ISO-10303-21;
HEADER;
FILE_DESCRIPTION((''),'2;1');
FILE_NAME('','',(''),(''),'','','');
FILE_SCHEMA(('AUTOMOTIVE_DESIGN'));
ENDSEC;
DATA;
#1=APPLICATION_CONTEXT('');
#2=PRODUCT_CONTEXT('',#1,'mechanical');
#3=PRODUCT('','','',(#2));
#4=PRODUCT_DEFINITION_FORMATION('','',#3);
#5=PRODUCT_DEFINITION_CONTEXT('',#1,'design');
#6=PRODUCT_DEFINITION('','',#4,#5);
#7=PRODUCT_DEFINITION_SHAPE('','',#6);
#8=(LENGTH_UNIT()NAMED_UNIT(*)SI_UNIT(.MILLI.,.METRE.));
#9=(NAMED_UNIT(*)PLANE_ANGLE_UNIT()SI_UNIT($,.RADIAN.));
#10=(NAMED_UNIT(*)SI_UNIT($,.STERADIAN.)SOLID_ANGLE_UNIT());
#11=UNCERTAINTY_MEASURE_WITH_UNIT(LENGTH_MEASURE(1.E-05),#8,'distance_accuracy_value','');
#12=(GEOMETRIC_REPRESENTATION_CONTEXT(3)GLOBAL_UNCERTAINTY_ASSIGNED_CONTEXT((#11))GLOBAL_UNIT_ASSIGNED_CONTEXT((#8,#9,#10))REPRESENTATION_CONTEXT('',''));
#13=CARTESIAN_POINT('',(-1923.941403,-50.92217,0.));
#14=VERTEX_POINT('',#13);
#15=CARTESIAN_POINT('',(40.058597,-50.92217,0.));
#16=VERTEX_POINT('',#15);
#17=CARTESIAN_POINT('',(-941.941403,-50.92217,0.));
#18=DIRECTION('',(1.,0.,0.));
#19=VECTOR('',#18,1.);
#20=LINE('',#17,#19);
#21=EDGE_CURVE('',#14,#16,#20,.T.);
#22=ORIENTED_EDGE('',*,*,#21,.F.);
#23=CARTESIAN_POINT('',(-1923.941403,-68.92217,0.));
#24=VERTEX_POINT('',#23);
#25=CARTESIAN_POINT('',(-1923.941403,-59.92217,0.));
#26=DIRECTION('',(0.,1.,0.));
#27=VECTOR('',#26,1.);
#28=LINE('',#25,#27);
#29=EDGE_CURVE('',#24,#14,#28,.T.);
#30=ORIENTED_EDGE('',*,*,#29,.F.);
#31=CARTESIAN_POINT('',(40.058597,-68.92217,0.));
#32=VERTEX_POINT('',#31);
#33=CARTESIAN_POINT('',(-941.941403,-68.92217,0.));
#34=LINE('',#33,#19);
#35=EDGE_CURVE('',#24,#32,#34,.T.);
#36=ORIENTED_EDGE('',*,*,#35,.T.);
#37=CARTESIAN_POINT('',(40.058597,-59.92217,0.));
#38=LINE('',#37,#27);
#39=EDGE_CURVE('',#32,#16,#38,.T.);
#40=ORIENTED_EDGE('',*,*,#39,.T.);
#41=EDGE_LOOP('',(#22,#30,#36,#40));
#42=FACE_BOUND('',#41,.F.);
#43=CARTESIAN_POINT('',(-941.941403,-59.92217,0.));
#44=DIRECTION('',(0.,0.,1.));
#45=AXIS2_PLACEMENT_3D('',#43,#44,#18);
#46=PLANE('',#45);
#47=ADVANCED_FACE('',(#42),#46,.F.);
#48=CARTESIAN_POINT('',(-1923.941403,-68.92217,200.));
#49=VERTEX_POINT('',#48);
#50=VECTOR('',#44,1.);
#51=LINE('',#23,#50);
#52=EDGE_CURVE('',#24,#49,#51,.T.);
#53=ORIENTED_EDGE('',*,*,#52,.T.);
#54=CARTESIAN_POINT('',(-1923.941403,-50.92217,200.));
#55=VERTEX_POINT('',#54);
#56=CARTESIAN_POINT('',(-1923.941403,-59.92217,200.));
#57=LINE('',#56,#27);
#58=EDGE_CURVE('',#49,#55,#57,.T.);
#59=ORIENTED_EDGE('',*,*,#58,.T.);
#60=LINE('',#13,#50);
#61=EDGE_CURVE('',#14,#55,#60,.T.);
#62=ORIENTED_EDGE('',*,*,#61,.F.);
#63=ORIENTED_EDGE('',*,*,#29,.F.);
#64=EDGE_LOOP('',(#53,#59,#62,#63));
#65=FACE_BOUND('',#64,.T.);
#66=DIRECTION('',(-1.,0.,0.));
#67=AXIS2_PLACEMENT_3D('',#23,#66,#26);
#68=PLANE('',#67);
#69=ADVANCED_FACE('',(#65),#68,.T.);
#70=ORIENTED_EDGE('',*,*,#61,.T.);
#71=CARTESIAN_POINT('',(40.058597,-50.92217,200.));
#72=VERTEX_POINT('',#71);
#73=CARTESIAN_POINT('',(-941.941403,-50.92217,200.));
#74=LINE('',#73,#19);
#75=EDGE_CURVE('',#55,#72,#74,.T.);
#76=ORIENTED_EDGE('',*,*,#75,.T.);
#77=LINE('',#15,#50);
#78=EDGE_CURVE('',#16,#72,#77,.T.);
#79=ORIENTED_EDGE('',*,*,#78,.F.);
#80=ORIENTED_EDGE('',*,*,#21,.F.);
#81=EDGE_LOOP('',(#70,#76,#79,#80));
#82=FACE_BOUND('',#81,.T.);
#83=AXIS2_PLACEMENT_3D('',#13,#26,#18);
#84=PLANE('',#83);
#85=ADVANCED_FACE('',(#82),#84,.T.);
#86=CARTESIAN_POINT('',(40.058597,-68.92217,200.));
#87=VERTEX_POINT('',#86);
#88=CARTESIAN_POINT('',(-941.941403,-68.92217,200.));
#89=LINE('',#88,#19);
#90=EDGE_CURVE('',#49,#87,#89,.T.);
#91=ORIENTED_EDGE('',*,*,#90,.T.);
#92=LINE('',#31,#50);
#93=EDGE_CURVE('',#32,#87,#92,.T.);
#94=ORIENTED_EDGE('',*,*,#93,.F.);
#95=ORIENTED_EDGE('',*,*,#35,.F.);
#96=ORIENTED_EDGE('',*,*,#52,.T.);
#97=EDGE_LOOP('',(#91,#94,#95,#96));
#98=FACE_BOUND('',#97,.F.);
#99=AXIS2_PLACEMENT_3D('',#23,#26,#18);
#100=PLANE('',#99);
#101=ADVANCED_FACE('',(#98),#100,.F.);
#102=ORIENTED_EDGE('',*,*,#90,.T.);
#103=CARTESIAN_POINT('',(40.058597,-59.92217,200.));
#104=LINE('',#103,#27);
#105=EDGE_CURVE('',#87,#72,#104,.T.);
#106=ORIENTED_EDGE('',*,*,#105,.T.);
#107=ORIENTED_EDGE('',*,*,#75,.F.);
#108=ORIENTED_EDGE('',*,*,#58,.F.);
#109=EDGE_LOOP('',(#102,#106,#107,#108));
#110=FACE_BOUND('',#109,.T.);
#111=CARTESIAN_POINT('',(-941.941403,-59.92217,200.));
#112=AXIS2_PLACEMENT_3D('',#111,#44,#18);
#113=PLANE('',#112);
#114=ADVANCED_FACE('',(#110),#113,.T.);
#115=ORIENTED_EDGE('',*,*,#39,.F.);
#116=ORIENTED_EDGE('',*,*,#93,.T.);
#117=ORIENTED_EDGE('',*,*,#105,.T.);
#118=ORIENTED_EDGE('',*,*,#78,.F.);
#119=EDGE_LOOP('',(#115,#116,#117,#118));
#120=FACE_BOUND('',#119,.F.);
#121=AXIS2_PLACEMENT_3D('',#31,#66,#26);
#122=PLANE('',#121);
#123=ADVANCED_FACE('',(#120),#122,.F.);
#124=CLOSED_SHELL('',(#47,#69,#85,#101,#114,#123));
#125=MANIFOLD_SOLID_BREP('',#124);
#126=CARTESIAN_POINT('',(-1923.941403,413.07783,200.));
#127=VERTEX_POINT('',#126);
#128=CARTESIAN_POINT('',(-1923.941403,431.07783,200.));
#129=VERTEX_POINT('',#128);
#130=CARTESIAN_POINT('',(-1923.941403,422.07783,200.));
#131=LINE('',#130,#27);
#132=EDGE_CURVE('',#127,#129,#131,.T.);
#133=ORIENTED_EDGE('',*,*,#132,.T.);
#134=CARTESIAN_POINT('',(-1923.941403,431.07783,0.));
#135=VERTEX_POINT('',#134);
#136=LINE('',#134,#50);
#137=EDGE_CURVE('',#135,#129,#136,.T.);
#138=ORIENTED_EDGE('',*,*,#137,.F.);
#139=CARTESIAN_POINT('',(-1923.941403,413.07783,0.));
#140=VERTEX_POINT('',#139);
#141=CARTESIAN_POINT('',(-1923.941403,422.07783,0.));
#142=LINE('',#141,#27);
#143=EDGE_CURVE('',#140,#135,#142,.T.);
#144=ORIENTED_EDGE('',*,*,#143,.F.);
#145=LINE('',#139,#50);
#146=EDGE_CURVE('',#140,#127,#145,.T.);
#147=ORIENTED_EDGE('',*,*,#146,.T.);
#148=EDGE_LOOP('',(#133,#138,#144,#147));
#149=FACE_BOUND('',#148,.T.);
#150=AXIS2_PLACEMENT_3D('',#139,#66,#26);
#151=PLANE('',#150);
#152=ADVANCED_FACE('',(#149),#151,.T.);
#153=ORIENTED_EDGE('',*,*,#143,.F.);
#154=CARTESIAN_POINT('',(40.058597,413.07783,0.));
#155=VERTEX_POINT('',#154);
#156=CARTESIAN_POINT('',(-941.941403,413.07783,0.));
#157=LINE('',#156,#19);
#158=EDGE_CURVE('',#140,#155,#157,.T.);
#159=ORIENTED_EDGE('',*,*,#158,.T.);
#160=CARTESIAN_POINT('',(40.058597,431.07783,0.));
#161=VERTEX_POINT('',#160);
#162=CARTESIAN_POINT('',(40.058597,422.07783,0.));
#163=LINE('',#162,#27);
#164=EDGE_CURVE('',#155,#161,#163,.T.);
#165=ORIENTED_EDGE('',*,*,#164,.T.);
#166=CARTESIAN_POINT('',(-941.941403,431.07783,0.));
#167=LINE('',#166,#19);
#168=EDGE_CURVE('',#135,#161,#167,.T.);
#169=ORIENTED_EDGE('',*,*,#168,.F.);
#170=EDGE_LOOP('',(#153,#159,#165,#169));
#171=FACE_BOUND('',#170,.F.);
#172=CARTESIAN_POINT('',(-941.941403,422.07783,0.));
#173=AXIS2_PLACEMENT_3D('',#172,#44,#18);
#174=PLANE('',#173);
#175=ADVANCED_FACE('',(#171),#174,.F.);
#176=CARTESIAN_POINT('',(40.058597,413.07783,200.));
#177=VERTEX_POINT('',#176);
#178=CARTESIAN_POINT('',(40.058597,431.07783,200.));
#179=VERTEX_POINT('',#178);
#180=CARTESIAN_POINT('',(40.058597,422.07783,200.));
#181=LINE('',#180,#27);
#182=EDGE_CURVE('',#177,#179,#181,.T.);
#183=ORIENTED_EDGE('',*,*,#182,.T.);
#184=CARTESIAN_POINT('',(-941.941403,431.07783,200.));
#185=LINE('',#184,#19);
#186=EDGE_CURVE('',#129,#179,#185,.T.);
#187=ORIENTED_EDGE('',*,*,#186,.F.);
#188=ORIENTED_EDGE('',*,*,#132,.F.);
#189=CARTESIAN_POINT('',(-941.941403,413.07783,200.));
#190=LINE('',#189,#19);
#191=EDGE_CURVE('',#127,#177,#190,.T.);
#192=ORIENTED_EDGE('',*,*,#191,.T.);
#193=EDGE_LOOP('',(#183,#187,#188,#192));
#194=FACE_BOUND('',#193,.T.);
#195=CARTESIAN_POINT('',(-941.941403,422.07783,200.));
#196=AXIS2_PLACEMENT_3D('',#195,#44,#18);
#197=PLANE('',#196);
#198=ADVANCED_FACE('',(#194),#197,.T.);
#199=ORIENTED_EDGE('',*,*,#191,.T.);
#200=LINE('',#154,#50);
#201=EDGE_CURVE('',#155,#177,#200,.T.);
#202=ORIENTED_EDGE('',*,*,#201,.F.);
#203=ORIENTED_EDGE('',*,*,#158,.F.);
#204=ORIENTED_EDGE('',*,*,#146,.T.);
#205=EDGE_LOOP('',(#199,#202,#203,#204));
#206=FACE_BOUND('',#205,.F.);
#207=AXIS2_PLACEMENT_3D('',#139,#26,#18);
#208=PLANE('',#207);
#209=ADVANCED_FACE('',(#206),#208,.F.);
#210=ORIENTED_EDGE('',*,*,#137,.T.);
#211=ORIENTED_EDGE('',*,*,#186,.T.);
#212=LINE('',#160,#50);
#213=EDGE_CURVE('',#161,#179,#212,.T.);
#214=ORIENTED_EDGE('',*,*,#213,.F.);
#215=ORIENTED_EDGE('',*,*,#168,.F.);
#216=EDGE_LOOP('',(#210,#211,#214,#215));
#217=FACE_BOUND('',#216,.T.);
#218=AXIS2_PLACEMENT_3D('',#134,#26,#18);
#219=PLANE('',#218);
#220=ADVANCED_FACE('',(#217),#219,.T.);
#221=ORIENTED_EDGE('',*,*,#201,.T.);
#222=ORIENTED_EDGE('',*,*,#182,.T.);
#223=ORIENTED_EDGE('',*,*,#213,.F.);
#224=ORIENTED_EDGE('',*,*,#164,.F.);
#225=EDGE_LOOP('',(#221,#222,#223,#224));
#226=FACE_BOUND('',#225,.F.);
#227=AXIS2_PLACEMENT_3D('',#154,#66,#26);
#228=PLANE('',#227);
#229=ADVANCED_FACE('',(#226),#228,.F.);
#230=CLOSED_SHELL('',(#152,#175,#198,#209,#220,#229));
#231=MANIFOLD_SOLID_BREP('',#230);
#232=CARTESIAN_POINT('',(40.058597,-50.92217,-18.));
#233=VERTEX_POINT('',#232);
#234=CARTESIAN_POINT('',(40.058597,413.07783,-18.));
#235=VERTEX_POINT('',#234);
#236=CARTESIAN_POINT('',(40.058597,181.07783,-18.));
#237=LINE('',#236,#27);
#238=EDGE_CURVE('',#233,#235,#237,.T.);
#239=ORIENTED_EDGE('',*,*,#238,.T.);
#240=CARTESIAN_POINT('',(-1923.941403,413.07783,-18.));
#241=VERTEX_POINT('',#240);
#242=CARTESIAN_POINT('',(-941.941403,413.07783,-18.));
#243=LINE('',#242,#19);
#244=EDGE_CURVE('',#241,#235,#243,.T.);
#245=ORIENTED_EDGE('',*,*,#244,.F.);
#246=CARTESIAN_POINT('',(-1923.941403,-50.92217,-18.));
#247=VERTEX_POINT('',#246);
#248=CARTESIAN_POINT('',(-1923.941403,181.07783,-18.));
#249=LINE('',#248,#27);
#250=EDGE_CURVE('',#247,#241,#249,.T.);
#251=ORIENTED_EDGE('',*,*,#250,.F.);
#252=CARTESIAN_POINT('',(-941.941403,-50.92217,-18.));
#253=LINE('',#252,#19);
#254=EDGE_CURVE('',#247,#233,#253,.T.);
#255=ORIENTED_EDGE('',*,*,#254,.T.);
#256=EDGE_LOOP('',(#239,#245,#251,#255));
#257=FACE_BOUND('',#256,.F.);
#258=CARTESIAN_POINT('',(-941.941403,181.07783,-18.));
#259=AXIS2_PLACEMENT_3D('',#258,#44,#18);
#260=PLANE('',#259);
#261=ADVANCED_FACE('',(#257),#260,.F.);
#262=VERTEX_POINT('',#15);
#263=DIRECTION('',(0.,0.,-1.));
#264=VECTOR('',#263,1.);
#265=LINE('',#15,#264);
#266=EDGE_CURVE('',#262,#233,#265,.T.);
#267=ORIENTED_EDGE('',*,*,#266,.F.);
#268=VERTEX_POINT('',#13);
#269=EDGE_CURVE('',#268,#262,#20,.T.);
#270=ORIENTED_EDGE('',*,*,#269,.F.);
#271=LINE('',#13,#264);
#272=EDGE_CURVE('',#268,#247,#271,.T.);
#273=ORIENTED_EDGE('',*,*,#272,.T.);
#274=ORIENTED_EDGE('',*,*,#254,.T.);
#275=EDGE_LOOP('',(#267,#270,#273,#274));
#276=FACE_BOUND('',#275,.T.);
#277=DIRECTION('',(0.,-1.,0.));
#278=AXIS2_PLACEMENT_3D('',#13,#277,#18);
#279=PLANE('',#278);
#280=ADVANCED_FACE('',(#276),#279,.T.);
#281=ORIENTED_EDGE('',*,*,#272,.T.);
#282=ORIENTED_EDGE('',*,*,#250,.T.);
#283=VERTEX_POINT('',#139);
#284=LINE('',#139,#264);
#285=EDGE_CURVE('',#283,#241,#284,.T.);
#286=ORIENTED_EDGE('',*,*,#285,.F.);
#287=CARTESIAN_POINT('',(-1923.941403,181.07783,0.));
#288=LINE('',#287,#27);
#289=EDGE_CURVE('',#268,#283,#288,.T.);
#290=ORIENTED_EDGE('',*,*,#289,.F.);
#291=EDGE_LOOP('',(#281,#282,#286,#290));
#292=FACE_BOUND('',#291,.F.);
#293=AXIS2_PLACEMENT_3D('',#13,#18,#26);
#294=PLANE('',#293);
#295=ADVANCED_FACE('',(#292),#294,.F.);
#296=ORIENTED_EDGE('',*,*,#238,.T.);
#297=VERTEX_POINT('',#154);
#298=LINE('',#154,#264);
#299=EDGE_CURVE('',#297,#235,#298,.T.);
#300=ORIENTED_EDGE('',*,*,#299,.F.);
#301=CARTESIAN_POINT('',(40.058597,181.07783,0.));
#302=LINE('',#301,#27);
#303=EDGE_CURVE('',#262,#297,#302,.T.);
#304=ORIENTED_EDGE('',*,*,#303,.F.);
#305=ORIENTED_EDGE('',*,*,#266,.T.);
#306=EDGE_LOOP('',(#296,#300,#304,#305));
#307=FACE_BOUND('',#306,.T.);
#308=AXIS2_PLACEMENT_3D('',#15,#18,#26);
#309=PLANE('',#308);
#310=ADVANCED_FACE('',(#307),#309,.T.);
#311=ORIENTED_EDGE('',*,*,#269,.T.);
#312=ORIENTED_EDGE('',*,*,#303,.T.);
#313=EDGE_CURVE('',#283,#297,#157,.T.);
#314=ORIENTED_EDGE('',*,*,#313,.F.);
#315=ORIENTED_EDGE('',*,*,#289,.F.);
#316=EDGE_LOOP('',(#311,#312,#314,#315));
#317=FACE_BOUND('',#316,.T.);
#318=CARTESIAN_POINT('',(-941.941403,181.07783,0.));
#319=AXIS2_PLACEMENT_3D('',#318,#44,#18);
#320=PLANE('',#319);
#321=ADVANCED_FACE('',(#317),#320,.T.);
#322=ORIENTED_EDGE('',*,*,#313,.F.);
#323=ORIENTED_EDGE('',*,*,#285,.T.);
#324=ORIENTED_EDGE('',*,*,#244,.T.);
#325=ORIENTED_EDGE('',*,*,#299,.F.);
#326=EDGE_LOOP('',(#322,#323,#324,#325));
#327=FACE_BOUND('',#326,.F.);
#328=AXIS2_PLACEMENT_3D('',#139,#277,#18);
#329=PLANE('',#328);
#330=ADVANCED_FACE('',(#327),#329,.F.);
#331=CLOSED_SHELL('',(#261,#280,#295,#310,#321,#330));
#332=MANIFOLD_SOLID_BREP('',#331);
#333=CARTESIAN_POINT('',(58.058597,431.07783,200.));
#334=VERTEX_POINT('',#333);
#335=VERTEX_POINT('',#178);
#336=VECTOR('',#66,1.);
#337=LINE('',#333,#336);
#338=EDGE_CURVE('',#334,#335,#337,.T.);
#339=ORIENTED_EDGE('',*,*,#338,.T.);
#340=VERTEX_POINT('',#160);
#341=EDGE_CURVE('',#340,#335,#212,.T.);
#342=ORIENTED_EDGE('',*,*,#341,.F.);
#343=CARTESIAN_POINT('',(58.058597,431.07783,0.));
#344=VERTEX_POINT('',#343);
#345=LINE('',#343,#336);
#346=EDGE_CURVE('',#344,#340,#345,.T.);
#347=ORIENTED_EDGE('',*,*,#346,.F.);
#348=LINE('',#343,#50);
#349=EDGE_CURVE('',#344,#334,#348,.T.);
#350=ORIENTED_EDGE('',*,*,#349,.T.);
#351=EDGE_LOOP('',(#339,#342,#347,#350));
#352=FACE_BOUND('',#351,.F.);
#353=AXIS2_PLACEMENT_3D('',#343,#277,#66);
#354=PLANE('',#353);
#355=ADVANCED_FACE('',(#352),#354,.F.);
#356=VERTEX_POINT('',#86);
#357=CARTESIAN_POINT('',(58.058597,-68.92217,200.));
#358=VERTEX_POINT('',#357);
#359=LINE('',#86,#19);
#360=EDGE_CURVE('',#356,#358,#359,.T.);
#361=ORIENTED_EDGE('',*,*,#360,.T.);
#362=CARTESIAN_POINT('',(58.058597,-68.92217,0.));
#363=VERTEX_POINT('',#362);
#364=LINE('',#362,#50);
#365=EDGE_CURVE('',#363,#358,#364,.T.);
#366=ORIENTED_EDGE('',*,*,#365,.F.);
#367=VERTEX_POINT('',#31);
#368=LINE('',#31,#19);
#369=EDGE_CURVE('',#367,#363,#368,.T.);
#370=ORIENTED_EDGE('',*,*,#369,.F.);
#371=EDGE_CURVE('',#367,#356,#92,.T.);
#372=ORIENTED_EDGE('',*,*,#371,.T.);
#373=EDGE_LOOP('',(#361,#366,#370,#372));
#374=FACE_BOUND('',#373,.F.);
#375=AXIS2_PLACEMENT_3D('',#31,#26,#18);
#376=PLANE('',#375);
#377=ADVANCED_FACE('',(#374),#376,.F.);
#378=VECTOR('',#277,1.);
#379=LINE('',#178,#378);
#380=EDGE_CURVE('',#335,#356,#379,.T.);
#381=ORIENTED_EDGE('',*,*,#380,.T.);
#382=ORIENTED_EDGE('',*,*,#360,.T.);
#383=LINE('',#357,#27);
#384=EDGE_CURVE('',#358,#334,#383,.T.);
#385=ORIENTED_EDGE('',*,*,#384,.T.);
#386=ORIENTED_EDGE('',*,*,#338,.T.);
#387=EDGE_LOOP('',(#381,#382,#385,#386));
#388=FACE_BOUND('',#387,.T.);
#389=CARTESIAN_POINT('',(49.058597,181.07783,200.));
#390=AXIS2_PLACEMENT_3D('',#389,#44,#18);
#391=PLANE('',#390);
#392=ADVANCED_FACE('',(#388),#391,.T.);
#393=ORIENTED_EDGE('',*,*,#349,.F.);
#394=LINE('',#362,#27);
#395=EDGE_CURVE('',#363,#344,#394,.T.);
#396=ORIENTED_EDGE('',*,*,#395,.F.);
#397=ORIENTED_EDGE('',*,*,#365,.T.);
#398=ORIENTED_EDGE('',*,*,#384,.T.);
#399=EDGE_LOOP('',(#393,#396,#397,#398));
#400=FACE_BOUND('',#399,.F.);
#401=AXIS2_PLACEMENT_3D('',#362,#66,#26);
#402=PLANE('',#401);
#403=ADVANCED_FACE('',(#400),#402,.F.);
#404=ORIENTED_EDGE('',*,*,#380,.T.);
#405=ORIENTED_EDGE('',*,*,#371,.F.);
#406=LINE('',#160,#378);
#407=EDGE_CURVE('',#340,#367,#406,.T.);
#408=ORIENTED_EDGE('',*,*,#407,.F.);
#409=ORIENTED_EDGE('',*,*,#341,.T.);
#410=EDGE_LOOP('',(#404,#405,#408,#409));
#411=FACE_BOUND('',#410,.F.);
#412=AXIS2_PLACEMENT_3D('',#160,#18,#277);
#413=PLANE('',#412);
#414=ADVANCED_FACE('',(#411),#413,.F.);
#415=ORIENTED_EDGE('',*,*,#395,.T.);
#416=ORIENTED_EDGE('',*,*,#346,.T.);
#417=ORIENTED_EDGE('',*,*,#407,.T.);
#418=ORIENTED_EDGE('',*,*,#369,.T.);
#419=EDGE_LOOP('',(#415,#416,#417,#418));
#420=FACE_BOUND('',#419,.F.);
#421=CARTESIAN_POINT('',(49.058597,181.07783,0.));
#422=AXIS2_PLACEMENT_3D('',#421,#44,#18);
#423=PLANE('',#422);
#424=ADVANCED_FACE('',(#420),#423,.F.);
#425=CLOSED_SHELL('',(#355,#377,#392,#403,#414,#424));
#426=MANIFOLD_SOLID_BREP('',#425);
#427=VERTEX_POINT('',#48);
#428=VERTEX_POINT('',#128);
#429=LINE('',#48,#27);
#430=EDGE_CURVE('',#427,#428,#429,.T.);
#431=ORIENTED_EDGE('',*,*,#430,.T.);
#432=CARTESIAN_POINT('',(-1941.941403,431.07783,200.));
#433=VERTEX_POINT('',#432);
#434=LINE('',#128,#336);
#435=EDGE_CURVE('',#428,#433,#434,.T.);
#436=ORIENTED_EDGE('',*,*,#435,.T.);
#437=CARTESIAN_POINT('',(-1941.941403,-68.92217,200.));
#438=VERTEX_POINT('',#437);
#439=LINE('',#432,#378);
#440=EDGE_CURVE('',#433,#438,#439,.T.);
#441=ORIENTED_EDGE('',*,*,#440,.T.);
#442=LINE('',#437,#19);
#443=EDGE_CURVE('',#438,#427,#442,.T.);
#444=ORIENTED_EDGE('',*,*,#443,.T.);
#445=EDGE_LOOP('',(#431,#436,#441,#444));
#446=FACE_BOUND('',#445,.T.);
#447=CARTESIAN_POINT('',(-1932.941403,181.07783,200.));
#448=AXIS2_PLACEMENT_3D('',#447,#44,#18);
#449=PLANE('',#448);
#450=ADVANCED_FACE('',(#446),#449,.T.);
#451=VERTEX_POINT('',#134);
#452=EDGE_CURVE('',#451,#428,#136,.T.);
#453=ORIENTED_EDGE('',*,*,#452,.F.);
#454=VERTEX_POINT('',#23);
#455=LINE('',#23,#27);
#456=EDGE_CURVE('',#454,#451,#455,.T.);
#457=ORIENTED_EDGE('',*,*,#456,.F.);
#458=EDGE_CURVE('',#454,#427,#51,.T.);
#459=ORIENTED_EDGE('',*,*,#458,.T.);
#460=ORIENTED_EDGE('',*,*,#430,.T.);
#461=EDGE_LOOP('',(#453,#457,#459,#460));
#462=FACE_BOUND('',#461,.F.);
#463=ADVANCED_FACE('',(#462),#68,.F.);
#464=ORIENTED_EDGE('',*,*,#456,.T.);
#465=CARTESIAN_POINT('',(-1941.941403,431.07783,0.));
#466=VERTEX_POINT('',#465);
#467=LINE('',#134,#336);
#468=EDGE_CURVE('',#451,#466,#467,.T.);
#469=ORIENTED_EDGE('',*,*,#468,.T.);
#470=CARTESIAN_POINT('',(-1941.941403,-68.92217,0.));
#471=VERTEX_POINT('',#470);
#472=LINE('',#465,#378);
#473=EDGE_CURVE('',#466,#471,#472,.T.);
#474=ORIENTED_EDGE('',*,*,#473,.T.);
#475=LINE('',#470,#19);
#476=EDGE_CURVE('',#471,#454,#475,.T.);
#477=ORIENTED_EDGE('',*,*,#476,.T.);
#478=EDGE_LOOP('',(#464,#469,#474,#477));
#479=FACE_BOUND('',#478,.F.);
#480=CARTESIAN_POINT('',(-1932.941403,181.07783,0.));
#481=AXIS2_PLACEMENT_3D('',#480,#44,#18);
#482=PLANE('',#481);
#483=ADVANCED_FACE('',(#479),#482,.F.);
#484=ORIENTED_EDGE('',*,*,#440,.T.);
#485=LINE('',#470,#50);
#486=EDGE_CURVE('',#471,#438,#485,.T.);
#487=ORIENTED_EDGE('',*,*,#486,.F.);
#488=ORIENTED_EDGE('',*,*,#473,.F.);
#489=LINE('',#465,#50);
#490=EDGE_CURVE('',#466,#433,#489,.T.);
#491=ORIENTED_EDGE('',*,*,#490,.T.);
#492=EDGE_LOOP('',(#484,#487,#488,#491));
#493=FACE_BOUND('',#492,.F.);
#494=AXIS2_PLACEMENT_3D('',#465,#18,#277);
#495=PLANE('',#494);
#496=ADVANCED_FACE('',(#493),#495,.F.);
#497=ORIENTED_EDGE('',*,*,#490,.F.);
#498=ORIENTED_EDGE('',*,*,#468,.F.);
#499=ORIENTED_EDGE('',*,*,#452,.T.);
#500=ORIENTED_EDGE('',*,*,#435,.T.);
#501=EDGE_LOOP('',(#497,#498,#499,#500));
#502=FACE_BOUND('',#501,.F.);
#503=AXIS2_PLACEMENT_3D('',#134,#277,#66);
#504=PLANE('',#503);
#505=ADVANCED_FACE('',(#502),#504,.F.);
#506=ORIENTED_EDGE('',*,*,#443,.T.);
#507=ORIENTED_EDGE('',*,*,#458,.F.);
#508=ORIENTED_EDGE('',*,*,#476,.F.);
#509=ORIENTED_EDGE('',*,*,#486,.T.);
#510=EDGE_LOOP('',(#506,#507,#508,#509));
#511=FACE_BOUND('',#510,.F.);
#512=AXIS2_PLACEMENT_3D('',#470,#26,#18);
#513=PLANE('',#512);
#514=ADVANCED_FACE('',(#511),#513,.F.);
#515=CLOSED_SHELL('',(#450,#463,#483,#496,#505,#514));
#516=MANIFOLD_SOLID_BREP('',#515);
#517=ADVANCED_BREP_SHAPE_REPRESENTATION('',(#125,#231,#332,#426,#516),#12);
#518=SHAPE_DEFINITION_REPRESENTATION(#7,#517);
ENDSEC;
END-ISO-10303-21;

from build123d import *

# Parameters (mm, degrees)
F1_DEPTH = 200
F0_W     = 1964
F0_H     = 18
F2_DEPTH = 200
F0_H_2   = 464
F3_DEPTH = 18


# Not quite as in the source:
# - the program builds the solid bodies; features that only make, move or delete a surface that nothing else refers to are left out


with BuildPart() as f1:
    # F0 (on Top) → F1 (new body)
    with BuildSketch(Plane.XY):
        Polygon((-1923.9414028525, 431.0778304935), (-1941.9414028525, 431.0778304935), (-1941.9414028525, -68.9221695065), (-1923.9414028525, -68.9221695065), (-1923.9414028525, -50.9221695065), (-1923.9414028525, 413.0778304935), align=None)
    extrude(amount=F1_DEPTH)


with BuildPart() as f1b:
    # F0 (on Top) → F1, piece 2 (new body)
    with BuildSketch(Plane.XY):
        Polygon((58.0585971475, 431.0778304935), (40.0585971475, 431.0778304935), (40.0585971475, 413.0778304935), (40.0585971475, -50.9221695065), (40.0585971475, -68.9221695065), (58.0585971475, -68.9221695065), align=None)
    extrude(amount=F1_DEPTH)


with BuildPart() as f2:
    # F0 (on Top) → F2 (new body)
    with BuildSketch(Plane.XY):
        with Locations((-941.9414028525, 422.0778304935)):
            Rectangle(F0_W, F0_H)
    extrude(amount=F2_DEPTH)


with BuildPart() as f2b:
    # F0 (on Top) → F2, piece 2 (new body)
    with BuildSketch(Plane.XY):
        with Locations((-941.9414028525, -59.9221695065)):
            Rectangle(F0_W, F0_H)
    extrude(amount=F2_DEPTH)


with BuildPart() as f3:
    # F0 (on Top) → F3 (new body)
    with BuildSketch(Plane.XY):
        with Locations((-941.9414028525, 181.0778304935)):
            Rectangle(F0_W, F0_H_2)
    extrude(amount=-F3_DEPTH)


solid = Compound([f1.part, f1b.part, f2.part, f2b.part, f3.part])
